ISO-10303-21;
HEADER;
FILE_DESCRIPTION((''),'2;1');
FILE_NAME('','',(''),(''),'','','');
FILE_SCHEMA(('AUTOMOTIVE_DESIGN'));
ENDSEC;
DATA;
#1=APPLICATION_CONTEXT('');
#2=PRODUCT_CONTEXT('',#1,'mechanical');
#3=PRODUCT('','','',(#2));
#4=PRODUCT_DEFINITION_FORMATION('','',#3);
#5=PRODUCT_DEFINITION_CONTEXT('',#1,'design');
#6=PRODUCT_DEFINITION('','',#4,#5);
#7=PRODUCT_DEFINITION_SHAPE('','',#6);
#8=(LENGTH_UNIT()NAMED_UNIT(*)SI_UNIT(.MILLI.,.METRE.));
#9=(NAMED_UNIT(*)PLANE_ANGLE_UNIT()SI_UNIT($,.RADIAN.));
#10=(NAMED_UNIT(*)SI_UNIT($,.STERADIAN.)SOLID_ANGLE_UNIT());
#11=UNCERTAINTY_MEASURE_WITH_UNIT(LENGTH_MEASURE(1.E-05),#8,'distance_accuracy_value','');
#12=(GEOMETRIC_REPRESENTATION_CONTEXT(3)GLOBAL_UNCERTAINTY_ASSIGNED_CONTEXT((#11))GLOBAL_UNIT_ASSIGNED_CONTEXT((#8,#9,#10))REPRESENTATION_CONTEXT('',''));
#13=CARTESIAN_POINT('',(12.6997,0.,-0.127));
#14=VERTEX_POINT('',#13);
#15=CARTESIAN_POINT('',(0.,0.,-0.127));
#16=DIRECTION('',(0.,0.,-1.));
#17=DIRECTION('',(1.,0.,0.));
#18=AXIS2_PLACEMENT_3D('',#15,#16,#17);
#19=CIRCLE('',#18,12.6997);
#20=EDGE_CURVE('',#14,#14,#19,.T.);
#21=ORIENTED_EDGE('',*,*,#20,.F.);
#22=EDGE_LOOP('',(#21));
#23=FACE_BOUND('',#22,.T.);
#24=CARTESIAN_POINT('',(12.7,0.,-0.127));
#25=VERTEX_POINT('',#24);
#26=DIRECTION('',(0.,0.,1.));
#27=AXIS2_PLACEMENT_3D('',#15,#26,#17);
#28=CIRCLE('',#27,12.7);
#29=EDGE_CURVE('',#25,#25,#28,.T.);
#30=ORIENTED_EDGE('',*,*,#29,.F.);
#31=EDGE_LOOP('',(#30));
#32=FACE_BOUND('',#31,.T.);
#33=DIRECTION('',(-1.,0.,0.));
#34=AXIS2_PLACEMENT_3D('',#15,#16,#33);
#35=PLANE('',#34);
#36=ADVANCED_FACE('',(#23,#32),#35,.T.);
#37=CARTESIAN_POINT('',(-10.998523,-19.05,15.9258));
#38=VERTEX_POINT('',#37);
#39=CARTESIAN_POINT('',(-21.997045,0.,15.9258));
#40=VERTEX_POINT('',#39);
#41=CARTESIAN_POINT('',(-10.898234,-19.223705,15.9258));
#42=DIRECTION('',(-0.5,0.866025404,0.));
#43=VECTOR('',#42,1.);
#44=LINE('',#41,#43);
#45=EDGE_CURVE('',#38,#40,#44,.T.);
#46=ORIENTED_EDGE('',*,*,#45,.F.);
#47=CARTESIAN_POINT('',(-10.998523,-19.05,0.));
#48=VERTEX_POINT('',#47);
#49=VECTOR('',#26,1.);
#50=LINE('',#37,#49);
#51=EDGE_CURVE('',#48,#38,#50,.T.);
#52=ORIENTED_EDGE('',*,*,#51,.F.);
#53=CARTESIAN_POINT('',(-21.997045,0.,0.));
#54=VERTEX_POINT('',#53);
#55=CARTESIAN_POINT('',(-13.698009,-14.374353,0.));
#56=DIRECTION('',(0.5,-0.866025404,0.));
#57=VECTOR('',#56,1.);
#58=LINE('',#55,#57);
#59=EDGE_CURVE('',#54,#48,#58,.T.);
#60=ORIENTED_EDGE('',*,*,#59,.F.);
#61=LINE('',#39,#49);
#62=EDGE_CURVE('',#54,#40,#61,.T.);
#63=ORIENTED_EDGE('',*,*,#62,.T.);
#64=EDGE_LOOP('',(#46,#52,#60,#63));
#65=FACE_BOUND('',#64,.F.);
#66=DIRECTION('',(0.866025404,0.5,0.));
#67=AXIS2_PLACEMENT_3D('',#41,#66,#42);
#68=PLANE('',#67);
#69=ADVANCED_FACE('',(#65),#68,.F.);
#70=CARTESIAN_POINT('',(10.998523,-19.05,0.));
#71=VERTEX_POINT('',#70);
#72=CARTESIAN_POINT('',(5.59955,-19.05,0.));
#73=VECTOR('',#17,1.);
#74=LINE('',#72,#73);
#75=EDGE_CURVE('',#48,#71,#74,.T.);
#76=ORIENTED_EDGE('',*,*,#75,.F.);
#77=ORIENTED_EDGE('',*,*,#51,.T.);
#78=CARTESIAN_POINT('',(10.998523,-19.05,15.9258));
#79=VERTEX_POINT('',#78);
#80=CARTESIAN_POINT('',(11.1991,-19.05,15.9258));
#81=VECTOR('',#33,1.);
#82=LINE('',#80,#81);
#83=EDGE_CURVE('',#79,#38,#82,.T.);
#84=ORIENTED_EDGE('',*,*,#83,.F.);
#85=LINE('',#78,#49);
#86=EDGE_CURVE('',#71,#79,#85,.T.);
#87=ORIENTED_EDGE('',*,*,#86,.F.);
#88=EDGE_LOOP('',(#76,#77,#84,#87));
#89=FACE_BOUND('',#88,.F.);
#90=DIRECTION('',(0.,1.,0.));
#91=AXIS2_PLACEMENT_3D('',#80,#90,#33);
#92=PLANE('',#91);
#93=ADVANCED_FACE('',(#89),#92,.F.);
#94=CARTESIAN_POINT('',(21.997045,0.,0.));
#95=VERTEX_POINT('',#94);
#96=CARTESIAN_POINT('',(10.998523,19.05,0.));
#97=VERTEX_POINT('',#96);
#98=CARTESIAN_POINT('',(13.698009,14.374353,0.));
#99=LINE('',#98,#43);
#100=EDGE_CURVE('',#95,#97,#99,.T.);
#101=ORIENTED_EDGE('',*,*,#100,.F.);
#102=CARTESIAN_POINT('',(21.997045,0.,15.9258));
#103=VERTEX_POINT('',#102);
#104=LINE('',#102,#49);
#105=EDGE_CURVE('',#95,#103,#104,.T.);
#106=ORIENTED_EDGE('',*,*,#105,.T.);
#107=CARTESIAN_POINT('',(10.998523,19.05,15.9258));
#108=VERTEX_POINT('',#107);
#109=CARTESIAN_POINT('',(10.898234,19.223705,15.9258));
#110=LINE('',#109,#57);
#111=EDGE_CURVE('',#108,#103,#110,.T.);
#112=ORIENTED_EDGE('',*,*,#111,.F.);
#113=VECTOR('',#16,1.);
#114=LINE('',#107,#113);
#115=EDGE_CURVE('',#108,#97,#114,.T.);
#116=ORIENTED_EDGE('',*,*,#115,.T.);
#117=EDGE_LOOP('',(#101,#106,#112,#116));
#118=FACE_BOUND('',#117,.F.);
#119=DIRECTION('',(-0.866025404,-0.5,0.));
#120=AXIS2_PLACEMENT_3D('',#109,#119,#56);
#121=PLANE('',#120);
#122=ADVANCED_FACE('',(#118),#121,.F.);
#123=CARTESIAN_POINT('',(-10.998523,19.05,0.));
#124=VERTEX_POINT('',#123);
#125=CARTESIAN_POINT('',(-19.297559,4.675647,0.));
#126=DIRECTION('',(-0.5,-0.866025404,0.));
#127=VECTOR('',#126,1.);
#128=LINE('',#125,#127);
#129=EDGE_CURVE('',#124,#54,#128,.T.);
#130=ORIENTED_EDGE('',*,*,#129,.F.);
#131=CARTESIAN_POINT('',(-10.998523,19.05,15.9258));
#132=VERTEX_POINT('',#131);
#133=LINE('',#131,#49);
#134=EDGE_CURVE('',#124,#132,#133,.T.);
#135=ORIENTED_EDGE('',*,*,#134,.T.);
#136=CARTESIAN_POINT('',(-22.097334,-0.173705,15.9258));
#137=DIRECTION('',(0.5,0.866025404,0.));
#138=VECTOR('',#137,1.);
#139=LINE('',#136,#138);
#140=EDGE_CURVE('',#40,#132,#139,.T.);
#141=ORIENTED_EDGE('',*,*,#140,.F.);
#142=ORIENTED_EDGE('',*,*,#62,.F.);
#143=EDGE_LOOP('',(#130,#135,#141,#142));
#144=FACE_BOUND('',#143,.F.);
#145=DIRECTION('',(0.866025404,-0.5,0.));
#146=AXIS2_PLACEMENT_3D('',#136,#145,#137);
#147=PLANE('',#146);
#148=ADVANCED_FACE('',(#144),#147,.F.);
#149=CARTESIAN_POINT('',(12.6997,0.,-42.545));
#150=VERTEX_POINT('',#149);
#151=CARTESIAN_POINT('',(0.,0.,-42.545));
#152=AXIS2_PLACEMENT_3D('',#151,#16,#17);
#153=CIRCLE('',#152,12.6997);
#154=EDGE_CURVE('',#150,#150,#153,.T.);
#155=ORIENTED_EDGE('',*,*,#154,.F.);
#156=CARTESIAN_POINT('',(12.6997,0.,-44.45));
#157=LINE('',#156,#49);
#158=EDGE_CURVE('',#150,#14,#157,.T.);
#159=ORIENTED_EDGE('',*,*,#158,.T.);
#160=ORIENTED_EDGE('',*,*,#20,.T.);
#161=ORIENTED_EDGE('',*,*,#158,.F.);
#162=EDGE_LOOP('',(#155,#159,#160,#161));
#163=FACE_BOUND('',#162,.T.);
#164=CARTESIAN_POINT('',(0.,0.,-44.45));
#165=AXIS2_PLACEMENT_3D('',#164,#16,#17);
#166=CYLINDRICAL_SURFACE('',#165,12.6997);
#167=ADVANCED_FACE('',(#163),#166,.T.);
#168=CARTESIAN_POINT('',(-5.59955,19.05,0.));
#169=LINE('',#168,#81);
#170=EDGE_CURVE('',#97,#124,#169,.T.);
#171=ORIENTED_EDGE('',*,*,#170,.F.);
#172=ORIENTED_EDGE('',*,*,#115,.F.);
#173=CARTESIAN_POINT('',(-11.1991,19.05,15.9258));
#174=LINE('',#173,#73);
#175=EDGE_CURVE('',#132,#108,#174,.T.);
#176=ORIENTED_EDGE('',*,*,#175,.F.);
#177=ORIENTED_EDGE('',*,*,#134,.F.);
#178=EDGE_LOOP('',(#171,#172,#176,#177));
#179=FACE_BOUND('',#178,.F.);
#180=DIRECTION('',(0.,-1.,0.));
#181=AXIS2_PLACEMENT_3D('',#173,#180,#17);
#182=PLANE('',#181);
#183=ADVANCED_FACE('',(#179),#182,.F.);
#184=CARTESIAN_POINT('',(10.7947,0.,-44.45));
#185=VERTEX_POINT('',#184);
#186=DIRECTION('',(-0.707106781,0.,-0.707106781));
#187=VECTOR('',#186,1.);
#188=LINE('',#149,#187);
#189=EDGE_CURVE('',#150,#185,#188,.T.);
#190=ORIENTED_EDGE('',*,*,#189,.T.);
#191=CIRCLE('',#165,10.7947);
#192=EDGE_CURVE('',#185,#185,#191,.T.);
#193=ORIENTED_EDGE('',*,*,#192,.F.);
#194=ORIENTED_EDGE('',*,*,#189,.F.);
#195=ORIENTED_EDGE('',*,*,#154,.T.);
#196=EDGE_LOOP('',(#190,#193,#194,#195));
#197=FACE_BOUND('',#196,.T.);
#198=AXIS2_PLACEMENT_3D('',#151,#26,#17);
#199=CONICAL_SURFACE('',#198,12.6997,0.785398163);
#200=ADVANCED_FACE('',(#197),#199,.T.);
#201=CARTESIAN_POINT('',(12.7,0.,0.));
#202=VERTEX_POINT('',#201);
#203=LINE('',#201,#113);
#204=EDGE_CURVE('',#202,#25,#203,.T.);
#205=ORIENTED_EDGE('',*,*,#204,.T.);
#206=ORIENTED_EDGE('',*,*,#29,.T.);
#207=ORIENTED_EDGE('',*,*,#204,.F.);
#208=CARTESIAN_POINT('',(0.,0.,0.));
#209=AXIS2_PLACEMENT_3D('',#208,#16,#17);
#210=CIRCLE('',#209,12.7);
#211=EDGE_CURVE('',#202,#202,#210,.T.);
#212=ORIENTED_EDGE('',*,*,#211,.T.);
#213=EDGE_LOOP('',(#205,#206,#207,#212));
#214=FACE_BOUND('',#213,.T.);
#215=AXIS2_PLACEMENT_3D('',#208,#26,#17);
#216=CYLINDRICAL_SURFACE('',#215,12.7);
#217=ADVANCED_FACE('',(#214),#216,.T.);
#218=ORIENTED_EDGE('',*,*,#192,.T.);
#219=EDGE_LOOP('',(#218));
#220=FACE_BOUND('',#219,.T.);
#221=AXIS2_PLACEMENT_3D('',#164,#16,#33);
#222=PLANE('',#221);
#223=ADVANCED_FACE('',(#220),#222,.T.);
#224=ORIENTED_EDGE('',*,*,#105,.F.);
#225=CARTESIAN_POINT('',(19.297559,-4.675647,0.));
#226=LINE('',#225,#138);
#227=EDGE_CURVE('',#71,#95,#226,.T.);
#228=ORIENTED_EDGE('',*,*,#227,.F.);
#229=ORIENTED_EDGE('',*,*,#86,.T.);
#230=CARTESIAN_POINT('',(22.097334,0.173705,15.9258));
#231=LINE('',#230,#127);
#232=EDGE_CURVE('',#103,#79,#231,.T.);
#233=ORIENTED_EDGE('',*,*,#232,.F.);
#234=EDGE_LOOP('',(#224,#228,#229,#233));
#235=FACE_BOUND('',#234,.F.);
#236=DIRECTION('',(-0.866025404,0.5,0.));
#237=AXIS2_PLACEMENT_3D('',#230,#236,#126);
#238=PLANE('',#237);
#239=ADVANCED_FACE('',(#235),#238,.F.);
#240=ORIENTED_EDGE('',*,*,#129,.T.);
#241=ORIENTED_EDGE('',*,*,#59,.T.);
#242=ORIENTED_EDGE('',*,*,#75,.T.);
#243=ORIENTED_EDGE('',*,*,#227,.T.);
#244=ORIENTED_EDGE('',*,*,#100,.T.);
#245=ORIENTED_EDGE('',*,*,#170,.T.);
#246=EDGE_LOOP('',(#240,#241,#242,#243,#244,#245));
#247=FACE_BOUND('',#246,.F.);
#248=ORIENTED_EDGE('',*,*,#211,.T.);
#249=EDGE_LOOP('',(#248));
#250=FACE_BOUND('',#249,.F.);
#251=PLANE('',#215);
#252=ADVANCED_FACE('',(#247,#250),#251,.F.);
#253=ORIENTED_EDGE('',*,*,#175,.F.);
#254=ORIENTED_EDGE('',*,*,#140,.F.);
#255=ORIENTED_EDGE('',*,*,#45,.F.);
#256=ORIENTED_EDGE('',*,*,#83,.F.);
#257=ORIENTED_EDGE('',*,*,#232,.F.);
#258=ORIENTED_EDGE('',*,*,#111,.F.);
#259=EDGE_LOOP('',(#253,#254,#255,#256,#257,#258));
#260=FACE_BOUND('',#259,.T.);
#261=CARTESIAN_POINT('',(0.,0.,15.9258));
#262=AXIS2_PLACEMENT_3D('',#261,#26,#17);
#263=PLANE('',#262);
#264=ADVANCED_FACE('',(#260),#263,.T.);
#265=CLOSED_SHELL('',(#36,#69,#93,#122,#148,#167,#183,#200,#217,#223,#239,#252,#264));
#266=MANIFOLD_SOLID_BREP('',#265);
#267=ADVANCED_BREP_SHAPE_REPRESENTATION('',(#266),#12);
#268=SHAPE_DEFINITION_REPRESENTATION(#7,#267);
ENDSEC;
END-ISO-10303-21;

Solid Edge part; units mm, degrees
sketch "Sketch1" plane through (0, 0, 0) normal (0, 0, 1) x (1, 0, 0)
  circle A0 centre (0, 0) radius 22.098
  dimension "D1" = 44.196
extrude "Protrusion1" add sketch "Sketch1" along normal blind 15.9258
sketch "Sketch2" plane through (0, 0, 0) normal (0, 0, -1) x (1, 0, 0)
  circle A0 centre (0, 0) radius 12.7
extrude "Protrusion2" add sketch "Sketch2" along normal blind 44.45
sketch "Sketch3" plane through (0, 0, -44.45) normal (0, 0, -1) x (1, 0, 0)
  circle A0 centre (0, 0) radius 12.6997
extrude "Cutout1" cut sketch "Sketch3" against normal blind 44.323 flip side to cut
chamfer "Chamfer_1" distance 1.905 angle 45 1 edges at (-12.6997, 0, -44.45)
sketch "Sketch4" plane through (0, 0, 15.9258) normal (0, 0, 1) x (1, 0, 0)
  line L0 (-11.1991, 19.05) -> (11.1991, 19.05)
  dimension "D1" = 38.1
extrude "Cutout2" cut sketch "Sketch4" against normal up to next material side at (0, 19.1, 15.9258)
pattern_circular "Pattern1" count 6 over 360 about axis through (0, 0, 15.9258) along (0, 0, 1) of "Cutout2"
properties part number "113906"
